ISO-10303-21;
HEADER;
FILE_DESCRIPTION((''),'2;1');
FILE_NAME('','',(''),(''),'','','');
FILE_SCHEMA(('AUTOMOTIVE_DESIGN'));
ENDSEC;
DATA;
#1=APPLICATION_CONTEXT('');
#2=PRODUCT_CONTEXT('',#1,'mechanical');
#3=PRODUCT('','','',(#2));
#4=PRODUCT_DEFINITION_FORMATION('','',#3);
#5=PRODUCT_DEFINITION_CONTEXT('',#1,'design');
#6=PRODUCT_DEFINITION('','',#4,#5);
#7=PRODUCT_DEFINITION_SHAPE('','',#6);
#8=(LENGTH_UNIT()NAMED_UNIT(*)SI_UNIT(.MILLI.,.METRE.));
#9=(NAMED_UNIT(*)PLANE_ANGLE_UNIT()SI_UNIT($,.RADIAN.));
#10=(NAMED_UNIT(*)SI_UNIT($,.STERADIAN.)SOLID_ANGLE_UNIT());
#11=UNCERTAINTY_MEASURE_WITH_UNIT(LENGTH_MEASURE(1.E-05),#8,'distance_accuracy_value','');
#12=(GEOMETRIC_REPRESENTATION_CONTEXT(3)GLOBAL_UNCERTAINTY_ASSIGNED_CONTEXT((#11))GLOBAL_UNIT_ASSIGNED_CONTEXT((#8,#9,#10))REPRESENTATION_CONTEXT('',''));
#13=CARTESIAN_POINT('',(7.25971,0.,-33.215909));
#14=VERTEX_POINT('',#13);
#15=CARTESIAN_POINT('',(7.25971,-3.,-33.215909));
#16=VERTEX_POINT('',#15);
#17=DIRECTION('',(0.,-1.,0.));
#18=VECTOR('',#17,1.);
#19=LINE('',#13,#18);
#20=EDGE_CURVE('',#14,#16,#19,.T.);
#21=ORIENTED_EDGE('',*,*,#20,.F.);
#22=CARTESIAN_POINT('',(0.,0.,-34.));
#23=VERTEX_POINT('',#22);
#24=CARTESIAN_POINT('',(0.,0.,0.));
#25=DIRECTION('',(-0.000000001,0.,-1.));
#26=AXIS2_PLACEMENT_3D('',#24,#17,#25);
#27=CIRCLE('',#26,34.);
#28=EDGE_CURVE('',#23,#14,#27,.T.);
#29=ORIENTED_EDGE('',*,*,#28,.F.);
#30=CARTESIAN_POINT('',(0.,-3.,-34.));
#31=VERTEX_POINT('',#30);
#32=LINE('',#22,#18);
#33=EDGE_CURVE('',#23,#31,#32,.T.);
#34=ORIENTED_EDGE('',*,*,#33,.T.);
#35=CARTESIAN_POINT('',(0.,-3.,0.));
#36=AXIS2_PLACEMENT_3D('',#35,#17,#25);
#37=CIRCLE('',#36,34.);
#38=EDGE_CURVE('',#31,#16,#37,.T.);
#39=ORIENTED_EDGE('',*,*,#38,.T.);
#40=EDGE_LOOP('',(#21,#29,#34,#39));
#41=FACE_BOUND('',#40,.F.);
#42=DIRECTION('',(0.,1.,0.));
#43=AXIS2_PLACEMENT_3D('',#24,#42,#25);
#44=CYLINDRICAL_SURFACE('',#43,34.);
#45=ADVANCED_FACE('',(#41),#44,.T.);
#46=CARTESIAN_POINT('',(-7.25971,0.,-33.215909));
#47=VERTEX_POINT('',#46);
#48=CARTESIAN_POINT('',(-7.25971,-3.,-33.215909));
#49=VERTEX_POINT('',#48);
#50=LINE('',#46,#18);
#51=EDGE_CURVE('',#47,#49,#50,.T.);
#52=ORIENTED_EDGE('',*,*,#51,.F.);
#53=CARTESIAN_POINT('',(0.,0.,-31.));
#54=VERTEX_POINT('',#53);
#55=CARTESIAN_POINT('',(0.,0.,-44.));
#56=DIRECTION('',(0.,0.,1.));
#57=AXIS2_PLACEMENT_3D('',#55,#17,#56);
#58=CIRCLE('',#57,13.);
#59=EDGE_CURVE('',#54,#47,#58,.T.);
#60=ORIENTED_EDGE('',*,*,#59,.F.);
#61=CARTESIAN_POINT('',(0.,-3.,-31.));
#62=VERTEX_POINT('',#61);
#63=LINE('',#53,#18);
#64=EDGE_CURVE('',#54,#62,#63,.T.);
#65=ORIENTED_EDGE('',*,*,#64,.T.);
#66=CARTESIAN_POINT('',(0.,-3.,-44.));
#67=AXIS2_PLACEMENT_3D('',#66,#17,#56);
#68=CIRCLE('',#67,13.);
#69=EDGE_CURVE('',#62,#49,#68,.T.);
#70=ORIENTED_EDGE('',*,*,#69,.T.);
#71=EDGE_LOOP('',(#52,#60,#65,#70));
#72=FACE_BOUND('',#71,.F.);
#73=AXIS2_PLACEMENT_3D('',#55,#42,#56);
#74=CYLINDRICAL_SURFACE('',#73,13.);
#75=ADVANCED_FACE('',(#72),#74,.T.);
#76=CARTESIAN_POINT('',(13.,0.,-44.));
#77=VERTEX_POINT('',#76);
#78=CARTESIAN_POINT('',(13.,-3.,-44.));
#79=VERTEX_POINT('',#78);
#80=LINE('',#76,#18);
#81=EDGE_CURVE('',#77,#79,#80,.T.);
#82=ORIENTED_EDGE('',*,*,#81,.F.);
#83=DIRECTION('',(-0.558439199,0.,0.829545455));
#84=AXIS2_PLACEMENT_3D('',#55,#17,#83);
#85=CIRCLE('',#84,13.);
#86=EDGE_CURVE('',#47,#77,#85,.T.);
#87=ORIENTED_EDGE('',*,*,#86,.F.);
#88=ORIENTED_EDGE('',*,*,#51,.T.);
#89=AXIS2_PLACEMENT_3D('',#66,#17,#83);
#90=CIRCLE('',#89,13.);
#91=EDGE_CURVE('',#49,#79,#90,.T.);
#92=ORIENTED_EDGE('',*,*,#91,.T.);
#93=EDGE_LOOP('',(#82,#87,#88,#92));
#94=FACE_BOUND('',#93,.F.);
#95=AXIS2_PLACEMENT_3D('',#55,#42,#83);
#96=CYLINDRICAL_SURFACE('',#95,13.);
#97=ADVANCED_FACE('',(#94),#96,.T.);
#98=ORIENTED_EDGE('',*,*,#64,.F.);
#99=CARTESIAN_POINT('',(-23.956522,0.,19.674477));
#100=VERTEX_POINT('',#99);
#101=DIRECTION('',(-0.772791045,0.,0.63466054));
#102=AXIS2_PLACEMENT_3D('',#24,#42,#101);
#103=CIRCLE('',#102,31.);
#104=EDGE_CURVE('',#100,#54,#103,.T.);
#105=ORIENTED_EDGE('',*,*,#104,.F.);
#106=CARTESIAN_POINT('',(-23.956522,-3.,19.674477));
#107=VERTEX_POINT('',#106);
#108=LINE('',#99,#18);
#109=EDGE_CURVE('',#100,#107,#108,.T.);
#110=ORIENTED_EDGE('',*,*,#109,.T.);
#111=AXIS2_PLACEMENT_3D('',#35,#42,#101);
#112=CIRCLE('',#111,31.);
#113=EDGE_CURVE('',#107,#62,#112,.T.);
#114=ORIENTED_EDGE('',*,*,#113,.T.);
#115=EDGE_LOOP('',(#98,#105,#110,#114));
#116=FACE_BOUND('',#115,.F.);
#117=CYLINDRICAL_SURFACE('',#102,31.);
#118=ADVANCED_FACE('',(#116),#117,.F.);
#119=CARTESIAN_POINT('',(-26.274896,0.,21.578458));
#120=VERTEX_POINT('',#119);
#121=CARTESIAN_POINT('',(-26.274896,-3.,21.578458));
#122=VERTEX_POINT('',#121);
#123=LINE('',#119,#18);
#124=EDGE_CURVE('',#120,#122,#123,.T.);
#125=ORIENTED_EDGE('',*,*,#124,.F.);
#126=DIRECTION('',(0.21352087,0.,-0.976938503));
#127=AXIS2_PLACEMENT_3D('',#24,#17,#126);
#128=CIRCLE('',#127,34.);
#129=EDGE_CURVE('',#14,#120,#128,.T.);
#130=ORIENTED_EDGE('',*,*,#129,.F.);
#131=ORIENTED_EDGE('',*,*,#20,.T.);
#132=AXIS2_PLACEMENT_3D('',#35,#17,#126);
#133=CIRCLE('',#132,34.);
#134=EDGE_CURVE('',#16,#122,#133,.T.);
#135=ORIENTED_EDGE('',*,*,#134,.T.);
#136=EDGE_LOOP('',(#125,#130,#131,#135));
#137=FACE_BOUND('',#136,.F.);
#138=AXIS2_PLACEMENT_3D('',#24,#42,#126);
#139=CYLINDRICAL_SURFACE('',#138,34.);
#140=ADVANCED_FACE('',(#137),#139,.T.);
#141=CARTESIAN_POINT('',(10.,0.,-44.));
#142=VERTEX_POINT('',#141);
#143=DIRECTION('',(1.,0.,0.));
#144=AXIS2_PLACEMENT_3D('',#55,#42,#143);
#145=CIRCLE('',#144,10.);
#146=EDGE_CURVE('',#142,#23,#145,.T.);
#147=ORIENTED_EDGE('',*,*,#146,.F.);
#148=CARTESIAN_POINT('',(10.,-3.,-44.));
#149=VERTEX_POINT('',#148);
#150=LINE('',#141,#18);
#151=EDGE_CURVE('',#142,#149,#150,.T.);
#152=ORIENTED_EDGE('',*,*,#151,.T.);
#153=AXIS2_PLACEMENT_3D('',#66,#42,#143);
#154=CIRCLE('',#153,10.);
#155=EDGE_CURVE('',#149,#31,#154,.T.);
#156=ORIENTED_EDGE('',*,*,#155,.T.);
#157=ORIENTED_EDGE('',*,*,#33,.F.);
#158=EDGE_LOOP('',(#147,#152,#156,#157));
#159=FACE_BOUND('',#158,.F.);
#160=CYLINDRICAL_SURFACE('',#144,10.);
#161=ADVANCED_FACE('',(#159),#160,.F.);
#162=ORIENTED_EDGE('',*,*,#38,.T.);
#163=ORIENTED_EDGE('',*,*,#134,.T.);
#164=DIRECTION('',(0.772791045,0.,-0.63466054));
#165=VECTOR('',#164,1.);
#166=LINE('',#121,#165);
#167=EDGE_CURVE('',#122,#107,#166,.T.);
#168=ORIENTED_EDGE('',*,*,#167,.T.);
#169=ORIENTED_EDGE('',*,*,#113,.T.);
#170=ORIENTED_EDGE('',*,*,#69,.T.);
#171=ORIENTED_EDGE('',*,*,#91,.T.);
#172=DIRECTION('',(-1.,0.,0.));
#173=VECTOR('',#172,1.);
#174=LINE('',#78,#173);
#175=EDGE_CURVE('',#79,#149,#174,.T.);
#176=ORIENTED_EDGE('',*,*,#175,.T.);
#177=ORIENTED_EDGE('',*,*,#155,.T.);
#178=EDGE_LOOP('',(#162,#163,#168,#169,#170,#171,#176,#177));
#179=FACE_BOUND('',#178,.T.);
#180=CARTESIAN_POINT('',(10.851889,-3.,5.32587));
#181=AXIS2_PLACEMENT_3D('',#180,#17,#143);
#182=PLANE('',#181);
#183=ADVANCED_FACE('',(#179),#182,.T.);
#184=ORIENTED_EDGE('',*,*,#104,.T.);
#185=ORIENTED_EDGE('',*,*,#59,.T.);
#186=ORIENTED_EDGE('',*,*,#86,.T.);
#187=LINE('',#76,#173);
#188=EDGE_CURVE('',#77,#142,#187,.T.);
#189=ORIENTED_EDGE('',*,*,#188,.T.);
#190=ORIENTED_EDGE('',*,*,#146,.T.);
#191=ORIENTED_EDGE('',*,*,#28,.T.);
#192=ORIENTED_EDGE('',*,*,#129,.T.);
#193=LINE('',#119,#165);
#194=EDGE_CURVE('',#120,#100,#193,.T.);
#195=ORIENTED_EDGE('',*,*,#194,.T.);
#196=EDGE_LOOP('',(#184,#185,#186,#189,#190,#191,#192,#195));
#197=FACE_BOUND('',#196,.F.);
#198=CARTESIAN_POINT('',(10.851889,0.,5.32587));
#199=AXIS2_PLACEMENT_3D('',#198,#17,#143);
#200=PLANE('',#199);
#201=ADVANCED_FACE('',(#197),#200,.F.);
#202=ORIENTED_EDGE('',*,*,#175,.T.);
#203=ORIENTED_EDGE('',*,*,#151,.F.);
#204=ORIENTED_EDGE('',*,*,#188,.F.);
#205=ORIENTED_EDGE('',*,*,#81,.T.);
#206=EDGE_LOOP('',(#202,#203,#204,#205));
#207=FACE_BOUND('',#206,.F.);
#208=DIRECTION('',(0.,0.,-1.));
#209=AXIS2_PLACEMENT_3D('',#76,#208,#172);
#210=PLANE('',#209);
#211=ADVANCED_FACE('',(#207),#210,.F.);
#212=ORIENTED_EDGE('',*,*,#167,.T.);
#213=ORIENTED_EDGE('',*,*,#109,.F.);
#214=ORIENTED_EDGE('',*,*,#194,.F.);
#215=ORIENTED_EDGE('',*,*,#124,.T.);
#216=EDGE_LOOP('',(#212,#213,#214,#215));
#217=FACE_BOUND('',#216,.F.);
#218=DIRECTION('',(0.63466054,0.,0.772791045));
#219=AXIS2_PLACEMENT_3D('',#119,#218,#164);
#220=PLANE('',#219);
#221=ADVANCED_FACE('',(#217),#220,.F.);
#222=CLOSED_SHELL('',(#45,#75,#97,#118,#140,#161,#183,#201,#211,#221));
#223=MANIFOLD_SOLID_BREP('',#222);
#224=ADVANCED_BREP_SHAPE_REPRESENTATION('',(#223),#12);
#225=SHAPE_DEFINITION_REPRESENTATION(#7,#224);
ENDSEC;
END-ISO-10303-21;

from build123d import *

# Parameters (mm, degrees)
F1_DEPTH = 3


with BuildPart() as f1:
    # F0 (on Front) → F1 (new body)
    with BuildSketch(Plane.XZ):
        with BuildLine():
            ThreePointArc((-23.9565223957, 19.6744767327), (10.4486316265, 29.1860599796), (31, 0))
            ThreePointArc((31, 0), (21.9203102168, -21.9203102168), (0, -31))
            ThreePointArc((0, -31), (3.7951823528, -31.5663122562), (7.2597095854, -33.2159090909))
            ThreePointArc((7.2597095854, -33.2159090909), (26.4842417855, -21.3209975622), (34, 0))
            ThreePointArc((34, 0), (11.4597895259, 32.010517397), (-26.2748955308, 21.578458352))
            Line((-26.2748955308, 21.578458352), (-23.9565223957, 19.6744767327))
        make_face()
        with BuildLine():
            ThreePointArc((7.2597095854, -33.2159090909), (3.7951823528, -31.5663122562), (0, -31))
            ThreePointArc((0, -31), (-3.7951823528, -31.5663122562), (-7.2597095854, -33.2159090909))
            ThreePointArc((-7.2597095854, -33.2159090909), (-3.6509650286, -33.8034089163), (-5.1e-08, -34))
            ThreePointArc((-5.1e-08, -34), (3.6509649778, -33.8034089217), (7.2597095854, -33.2159090909))
        make_face()
        with BuildLine():
            ThreePointArc((-5.1e-08, -34), (-3.6509650286, -33.8034089163), (-7.2597095854, -33.2159090909))
            ThreePointArc((-7.2597095854, -33.2159090909), (-6.1083457413, -55.4755440963), (13, -44))
            Line((13, -44), (10, -44))
            ThreePointArc((10, -44), (-7.0710677938, -51.0710678299), (-5.1e-08, -34))
        make_face()
    extrude(amount=F1_DEPTH)


solid = f1.part
